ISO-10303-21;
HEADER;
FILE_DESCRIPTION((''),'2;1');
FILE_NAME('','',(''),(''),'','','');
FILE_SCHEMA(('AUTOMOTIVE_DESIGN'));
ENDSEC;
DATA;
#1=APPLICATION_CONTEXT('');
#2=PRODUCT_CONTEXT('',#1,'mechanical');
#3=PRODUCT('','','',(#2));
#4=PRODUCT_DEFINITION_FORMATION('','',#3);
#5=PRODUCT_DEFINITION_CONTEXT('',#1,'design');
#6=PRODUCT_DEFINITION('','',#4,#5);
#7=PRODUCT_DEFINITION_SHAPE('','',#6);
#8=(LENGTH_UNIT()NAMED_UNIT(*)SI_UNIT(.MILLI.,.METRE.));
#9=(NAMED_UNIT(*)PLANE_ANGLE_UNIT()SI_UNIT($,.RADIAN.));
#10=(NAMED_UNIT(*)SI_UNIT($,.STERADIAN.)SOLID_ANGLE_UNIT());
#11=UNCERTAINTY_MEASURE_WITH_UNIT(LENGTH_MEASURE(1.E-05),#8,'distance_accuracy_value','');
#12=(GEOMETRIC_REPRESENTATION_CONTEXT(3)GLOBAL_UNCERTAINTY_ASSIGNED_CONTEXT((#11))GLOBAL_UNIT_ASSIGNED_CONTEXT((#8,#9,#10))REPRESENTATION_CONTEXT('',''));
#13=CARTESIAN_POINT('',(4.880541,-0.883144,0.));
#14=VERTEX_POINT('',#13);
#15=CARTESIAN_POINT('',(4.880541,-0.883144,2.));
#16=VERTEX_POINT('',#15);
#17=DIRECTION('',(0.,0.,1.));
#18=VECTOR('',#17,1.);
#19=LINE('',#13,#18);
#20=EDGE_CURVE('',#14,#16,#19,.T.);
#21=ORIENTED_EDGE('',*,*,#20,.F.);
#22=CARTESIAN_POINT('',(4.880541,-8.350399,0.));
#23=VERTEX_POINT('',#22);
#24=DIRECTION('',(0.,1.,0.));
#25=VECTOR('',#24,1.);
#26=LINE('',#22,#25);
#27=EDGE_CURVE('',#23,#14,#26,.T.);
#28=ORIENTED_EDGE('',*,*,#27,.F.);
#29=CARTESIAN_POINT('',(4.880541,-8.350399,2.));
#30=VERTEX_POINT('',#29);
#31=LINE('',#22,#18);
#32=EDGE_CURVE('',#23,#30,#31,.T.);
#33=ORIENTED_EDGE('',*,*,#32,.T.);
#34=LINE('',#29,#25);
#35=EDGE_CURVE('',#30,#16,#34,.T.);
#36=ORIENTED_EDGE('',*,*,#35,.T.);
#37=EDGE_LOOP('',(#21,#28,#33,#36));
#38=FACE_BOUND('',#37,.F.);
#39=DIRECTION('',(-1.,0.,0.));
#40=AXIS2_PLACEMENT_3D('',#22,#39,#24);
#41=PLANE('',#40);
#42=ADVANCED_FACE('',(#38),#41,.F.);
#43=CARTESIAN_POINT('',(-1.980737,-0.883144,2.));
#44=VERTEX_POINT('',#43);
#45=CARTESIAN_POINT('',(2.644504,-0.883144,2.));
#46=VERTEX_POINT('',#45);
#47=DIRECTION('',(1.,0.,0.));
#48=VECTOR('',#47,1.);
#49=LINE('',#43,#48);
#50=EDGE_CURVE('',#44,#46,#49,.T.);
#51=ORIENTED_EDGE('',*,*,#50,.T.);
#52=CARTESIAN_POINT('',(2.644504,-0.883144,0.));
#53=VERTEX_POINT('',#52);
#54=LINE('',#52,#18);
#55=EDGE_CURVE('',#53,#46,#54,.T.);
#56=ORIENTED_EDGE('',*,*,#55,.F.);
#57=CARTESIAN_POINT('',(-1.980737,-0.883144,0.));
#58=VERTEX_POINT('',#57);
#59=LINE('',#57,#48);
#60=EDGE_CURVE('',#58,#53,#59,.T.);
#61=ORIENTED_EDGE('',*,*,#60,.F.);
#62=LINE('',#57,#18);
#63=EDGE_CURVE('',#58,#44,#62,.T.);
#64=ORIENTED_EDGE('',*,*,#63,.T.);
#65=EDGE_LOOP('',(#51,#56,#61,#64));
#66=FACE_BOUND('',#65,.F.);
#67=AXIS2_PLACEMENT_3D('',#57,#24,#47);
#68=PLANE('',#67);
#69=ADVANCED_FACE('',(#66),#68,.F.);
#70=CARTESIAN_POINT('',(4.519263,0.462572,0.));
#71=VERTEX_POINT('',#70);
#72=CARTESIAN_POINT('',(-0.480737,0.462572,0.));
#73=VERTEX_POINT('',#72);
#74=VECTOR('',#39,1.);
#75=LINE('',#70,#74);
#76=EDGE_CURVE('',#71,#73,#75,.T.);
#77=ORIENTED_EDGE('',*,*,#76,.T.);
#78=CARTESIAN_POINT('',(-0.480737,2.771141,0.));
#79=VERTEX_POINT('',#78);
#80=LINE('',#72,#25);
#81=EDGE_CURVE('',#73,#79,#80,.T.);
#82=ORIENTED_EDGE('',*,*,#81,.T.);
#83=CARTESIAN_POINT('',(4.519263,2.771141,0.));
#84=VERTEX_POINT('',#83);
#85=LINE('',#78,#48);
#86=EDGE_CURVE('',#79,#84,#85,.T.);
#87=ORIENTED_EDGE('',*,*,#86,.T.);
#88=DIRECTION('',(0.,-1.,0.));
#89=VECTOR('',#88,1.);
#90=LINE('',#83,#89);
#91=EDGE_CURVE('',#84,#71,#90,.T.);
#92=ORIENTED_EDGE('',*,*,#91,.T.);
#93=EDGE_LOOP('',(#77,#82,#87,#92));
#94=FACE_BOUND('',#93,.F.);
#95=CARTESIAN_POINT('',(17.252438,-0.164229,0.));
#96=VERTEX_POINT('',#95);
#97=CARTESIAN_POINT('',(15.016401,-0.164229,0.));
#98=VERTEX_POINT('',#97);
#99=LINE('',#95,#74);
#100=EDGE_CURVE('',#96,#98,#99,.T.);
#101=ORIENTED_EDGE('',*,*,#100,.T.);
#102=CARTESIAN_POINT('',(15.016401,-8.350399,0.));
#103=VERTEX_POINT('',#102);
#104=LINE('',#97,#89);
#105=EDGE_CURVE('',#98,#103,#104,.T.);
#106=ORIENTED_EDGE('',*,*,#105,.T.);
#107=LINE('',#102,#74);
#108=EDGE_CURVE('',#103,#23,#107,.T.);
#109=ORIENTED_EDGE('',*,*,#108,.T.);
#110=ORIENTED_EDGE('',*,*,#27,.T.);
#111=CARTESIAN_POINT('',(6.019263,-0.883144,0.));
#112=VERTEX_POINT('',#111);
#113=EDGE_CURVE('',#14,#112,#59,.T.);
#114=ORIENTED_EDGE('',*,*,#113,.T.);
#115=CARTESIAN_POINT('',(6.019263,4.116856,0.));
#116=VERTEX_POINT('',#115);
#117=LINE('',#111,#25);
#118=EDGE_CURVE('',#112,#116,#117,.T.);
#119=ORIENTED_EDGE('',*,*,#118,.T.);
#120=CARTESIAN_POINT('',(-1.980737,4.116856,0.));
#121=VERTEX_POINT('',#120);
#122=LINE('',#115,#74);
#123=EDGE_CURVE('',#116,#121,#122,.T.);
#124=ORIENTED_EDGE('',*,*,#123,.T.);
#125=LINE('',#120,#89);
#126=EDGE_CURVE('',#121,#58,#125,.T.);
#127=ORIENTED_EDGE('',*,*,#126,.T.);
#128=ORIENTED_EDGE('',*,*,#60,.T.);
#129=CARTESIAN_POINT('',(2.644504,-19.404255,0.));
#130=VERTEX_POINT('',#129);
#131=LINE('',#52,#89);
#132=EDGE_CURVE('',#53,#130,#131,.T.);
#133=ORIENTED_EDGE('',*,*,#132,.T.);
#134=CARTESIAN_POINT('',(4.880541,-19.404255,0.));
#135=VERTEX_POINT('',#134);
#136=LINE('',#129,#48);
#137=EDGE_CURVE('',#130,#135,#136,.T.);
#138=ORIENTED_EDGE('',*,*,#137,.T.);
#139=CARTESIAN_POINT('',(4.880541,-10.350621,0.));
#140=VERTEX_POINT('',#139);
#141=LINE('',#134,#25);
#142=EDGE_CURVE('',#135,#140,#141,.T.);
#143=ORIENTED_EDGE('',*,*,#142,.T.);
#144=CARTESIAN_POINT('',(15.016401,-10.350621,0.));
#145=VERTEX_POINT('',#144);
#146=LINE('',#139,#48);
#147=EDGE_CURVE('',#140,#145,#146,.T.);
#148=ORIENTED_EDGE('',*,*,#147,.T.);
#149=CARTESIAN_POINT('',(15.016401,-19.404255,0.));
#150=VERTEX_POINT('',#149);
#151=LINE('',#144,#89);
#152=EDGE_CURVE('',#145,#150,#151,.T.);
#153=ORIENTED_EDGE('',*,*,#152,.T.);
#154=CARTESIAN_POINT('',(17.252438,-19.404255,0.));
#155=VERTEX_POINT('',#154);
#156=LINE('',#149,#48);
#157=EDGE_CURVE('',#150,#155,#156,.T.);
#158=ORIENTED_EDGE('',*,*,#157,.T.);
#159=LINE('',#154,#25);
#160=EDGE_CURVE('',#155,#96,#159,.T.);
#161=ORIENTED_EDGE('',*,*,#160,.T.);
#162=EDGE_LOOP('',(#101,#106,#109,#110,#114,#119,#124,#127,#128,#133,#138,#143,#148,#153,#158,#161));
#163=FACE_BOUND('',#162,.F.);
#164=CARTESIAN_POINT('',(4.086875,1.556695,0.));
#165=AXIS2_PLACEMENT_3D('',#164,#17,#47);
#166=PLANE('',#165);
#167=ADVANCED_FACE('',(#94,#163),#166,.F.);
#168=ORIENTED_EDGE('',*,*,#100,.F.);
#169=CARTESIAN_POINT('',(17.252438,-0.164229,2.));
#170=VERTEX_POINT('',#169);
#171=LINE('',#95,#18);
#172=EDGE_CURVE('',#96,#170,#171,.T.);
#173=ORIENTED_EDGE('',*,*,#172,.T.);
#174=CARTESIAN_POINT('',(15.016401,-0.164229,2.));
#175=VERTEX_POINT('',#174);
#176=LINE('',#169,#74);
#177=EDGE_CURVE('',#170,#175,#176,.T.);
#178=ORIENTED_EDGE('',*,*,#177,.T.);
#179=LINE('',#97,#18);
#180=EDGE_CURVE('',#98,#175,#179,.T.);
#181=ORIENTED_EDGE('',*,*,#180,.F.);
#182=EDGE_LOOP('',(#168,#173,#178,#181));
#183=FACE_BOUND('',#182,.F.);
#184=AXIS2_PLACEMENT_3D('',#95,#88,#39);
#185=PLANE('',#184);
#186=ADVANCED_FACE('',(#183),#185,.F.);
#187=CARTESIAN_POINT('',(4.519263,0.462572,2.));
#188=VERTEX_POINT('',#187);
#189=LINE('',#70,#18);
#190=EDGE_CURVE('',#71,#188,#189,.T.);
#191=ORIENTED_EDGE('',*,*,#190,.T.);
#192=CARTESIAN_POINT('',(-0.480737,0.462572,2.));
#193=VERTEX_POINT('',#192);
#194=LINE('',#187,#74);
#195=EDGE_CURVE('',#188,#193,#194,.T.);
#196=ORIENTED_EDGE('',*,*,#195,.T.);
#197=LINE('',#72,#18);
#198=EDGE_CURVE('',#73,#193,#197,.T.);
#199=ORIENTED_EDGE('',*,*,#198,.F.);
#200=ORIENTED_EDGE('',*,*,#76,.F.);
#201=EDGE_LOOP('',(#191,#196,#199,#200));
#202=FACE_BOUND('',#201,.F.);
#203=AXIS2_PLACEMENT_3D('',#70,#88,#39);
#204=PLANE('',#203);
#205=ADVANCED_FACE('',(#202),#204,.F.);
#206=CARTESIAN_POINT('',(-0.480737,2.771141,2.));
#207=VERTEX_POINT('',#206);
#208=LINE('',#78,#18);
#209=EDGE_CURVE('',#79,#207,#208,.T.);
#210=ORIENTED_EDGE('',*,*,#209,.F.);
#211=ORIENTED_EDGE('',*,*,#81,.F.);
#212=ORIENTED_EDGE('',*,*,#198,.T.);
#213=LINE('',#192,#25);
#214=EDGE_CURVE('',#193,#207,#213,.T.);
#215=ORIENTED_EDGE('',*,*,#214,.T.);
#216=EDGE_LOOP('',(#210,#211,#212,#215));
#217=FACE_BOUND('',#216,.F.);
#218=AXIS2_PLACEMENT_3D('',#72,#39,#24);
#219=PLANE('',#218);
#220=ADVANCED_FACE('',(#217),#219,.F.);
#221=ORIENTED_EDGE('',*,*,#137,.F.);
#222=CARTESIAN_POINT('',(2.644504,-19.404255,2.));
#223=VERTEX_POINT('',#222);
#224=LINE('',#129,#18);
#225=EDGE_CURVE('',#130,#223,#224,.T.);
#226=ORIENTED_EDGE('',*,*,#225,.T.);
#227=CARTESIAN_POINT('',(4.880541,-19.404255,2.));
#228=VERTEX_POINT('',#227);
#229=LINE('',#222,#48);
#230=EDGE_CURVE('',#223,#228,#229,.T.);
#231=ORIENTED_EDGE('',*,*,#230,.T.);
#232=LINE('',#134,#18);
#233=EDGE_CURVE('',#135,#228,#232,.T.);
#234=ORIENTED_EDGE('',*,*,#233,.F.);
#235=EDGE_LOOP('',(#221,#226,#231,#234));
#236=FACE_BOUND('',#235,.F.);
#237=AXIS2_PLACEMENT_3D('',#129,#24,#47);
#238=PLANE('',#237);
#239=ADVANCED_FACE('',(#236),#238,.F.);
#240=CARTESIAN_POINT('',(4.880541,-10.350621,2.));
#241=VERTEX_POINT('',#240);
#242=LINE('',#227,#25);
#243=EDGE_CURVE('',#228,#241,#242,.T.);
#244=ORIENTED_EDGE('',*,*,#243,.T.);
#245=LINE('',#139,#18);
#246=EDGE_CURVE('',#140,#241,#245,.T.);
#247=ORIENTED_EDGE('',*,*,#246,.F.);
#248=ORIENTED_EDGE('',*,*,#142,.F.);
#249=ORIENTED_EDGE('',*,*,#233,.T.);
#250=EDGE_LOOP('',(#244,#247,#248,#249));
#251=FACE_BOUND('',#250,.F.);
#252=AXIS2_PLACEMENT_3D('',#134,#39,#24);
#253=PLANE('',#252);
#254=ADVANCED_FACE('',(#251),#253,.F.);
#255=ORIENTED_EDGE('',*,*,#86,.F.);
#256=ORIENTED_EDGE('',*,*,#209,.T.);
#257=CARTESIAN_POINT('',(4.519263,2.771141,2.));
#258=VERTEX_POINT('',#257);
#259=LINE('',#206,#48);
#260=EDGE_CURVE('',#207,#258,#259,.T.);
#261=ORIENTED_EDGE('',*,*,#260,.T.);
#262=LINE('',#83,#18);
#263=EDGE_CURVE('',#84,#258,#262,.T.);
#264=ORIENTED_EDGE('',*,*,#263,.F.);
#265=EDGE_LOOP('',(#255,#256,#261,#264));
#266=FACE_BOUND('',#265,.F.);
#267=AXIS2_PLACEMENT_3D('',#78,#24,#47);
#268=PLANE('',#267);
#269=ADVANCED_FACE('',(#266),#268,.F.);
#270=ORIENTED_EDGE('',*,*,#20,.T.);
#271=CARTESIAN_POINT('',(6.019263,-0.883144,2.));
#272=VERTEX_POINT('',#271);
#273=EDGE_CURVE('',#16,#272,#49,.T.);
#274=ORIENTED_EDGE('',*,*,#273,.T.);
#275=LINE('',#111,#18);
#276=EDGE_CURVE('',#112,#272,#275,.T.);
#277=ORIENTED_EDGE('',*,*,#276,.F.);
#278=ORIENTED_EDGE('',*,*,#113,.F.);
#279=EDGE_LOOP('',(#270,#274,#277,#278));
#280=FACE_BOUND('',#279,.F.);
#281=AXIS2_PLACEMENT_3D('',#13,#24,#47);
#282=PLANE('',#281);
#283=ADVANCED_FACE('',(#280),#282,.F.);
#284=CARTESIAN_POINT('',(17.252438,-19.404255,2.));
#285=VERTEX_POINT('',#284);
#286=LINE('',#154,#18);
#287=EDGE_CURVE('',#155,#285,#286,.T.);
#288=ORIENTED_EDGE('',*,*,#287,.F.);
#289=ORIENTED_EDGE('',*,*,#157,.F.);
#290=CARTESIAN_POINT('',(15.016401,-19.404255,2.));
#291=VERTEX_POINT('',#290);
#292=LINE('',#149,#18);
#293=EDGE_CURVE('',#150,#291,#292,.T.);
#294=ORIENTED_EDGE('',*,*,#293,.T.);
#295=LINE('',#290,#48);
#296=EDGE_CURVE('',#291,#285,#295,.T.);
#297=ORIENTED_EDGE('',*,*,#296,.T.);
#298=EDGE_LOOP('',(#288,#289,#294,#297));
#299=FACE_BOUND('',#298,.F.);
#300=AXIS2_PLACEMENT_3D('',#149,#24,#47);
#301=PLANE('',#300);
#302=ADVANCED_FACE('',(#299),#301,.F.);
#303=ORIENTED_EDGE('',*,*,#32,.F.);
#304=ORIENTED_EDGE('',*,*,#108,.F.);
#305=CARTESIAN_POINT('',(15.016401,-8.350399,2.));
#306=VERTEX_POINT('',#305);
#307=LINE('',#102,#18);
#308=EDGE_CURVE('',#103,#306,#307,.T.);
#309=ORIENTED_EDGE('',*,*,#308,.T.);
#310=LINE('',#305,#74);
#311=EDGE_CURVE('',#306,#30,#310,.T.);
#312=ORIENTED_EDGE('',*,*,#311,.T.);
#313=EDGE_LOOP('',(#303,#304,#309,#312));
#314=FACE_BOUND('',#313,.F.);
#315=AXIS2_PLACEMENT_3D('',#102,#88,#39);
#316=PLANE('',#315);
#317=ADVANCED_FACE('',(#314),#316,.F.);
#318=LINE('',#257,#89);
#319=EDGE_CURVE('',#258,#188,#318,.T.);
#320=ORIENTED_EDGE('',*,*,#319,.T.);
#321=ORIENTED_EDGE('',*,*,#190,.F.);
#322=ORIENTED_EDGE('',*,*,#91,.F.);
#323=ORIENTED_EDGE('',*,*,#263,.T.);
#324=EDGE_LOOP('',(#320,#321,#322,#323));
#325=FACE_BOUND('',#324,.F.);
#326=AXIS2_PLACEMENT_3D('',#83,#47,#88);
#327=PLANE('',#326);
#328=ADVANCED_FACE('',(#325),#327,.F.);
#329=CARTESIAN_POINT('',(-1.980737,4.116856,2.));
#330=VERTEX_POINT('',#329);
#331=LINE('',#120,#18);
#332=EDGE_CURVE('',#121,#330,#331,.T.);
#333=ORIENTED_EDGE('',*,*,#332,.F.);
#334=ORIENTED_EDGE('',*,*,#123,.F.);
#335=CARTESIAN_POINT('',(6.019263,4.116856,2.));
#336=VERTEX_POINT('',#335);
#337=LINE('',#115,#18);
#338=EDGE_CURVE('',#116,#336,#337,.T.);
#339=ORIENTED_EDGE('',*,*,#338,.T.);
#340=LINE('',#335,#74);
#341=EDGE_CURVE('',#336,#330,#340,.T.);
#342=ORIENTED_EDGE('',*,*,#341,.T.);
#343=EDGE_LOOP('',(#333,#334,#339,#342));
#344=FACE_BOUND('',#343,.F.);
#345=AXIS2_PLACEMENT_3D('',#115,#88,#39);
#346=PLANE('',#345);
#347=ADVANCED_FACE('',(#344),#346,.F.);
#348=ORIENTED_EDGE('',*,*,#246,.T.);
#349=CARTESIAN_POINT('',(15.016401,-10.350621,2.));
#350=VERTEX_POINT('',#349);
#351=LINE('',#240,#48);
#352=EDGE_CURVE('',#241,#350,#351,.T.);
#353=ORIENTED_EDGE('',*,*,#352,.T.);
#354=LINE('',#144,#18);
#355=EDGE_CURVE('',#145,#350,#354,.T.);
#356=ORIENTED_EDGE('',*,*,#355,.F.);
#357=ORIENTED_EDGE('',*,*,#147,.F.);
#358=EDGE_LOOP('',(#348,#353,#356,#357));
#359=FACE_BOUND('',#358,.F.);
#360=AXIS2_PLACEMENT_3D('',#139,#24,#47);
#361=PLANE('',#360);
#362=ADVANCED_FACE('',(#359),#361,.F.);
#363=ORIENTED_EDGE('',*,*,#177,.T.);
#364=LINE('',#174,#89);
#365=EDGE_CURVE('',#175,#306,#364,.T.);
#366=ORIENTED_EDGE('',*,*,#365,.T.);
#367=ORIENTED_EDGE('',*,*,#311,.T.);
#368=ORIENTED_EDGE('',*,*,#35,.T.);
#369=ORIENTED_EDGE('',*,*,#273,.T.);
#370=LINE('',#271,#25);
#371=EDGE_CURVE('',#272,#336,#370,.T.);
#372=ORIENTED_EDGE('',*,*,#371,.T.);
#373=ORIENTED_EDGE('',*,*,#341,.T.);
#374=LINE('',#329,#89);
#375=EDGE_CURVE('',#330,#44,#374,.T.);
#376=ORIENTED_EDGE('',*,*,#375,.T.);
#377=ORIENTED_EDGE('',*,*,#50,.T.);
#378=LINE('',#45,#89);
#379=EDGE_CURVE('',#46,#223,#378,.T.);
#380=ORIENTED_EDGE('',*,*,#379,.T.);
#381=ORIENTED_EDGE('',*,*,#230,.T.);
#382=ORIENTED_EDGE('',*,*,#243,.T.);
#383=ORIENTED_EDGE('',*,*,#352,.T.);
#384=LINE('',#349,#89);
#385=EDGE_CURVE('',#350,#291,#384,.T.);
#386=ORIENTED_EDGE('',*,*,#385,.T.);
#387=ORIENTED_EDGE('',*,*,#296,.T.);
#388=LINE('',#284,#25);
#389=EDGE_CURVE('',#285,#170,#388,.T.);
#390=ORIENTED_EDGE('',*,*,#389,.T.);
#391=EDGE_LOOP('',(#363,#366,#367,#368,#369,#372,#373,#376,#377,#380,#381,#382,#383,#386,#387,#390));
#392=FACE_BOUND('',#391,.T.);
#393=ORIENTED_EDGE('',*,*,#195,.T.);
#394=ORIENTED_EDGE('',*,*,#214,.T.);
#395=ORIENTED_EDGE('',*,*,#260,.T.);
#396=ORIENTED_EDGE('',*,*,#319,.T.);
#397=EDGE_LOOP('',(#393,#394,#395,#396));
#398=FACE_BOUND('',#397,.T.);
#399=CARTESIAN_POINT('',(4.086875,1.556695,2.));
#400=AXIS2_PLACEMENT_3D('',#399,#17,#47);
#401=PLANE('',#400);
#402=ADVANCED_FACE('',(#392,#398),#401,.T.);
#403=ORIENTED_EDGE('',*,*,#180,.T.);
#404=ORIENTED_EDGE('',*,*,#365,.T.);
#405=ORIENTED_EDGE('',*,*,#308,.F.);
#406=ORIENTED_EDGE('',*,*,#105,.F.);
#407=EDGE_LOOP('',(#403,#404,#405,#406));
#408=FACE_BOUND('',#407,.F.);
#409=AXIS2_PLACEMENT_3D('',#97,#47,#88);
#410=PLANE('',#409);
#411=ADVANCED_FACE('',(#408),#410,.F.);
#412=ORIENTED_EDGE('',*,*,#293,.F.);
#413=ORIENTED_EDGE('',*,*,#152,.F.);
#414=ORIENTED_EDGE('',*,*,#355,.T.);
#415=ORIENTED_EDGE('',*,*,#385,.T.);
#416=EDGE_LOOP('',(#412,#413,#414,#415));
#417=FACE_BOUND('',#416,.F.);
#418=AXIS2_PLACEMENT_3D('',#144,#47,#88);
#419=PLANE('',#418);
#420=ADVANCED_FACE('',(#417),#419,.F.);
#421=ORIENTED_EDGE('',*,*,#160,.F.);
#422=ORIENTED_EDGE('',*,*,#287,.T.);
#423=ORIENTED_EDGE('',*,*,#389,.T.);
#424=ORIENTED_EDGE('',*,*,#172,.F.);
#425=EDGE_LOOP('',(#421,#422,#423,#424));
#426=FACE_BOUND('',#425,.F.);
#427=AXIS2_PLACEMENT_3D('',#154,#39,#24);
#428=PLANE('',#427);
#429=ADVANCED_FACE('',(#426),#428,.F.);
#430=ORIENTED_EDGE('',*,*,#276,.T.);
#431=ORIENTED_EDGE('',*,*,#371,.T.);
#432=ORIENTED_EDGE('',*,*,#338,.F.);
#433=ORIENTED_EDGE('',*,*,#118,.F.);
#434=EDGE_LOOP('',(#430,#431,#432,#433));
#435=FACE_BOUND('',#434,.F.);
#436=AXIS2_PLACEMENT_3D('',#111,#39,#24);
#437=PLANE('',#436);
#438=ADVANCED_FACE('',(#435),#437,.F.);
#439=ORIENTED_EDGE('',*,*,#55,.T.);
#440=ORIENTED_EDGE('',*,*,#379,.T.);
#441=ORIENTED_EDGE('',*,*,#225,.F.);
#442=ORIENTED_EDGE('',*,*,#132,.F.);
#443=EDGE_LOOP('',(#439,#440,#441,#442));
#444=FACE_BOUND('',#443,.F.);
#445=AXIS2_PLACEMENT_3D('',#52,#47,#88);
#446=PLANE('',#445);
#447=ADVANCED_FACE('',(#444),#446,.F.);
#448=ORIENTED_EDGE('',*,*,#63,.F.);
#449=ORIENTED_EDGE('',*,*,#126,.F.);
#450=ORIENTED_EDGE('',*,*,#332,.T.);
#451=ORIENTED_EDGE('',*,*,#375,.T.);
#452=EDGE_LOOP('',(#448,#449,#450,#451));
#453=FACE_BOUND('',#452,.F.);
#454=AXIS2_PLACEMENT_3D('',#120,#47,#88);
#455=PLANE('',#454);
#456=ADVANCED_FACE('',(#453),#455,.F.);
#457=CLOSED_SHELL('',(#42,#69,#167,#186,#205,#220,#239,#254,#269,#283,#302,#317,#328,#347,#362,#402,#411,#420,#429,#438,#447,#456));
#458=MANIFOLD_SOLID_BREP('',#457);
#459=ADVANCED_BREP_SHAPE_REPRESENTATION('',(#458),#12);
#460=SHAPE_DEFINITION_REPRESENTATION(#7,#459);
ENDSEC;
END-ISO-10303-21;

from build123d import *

# Parameters (mm, degrees)
F0_W     = 2.236037234
F0_H     = 0.718915021
F1_DEPTH = 2


with BuildPart() as f1:
    # F0 (on Top) → F1 (new body)
    with BuildSketch(Plane.XY):
        Polygon((2.0192633942, 0.4625715956), (2.0192633942, -0.8831437444), (2.6445035461, -0.8831437444), (2.6445035461, -0.1642287234), (4.8805407801, -0.1642287234), (4.8805407801, -0.8831437444), (6.0192633942, -0.8831437444), (6.0192633942, 4.1168562556), (2.0192633942, 4.1168562556), (2.0192633942, 2.7711409156), (4.5192633942, 2.7711409156), (4.5192633942, 0.4625715956), align=None)
        Polygon((-1.9807366058, -0.8831437444), (2.0192633942, -0.8831437444), (2.0192633942, 0.4625715956), (-0.4807366058, 0.4625715956), (-0.4807366058, 2.7711409156), (2.0192633942, 2.7711409156), (2.0192633942, 4.1168562556), (-1.9807366058, 4.1168562556), align=None)
        with Locations((3.7625221631, -0.5236862339)):
            Rectangle(F0_W, F0_H)
        Polygon((4.8805407801, -0.8831437444), (2.6445035461, -0.8831437444), (2.6445035461, -19.4042553191), (4.8805407801, -19.4042553191), (4.8805407801, -10.3506205674), (15.0164007092, -10.3506205674), (15.0164007092, -19.4042553191), (17.2524379433, -19.4042553191), (17.2524379433, -0.1642287234), (15.0164007092, -0.1642287234), (15.0164007092, -8.3503989362), (4.8805407801, -8.3503989362), align=None)
    extrude(amount=F1_DEPTH)


solid = f1.part
